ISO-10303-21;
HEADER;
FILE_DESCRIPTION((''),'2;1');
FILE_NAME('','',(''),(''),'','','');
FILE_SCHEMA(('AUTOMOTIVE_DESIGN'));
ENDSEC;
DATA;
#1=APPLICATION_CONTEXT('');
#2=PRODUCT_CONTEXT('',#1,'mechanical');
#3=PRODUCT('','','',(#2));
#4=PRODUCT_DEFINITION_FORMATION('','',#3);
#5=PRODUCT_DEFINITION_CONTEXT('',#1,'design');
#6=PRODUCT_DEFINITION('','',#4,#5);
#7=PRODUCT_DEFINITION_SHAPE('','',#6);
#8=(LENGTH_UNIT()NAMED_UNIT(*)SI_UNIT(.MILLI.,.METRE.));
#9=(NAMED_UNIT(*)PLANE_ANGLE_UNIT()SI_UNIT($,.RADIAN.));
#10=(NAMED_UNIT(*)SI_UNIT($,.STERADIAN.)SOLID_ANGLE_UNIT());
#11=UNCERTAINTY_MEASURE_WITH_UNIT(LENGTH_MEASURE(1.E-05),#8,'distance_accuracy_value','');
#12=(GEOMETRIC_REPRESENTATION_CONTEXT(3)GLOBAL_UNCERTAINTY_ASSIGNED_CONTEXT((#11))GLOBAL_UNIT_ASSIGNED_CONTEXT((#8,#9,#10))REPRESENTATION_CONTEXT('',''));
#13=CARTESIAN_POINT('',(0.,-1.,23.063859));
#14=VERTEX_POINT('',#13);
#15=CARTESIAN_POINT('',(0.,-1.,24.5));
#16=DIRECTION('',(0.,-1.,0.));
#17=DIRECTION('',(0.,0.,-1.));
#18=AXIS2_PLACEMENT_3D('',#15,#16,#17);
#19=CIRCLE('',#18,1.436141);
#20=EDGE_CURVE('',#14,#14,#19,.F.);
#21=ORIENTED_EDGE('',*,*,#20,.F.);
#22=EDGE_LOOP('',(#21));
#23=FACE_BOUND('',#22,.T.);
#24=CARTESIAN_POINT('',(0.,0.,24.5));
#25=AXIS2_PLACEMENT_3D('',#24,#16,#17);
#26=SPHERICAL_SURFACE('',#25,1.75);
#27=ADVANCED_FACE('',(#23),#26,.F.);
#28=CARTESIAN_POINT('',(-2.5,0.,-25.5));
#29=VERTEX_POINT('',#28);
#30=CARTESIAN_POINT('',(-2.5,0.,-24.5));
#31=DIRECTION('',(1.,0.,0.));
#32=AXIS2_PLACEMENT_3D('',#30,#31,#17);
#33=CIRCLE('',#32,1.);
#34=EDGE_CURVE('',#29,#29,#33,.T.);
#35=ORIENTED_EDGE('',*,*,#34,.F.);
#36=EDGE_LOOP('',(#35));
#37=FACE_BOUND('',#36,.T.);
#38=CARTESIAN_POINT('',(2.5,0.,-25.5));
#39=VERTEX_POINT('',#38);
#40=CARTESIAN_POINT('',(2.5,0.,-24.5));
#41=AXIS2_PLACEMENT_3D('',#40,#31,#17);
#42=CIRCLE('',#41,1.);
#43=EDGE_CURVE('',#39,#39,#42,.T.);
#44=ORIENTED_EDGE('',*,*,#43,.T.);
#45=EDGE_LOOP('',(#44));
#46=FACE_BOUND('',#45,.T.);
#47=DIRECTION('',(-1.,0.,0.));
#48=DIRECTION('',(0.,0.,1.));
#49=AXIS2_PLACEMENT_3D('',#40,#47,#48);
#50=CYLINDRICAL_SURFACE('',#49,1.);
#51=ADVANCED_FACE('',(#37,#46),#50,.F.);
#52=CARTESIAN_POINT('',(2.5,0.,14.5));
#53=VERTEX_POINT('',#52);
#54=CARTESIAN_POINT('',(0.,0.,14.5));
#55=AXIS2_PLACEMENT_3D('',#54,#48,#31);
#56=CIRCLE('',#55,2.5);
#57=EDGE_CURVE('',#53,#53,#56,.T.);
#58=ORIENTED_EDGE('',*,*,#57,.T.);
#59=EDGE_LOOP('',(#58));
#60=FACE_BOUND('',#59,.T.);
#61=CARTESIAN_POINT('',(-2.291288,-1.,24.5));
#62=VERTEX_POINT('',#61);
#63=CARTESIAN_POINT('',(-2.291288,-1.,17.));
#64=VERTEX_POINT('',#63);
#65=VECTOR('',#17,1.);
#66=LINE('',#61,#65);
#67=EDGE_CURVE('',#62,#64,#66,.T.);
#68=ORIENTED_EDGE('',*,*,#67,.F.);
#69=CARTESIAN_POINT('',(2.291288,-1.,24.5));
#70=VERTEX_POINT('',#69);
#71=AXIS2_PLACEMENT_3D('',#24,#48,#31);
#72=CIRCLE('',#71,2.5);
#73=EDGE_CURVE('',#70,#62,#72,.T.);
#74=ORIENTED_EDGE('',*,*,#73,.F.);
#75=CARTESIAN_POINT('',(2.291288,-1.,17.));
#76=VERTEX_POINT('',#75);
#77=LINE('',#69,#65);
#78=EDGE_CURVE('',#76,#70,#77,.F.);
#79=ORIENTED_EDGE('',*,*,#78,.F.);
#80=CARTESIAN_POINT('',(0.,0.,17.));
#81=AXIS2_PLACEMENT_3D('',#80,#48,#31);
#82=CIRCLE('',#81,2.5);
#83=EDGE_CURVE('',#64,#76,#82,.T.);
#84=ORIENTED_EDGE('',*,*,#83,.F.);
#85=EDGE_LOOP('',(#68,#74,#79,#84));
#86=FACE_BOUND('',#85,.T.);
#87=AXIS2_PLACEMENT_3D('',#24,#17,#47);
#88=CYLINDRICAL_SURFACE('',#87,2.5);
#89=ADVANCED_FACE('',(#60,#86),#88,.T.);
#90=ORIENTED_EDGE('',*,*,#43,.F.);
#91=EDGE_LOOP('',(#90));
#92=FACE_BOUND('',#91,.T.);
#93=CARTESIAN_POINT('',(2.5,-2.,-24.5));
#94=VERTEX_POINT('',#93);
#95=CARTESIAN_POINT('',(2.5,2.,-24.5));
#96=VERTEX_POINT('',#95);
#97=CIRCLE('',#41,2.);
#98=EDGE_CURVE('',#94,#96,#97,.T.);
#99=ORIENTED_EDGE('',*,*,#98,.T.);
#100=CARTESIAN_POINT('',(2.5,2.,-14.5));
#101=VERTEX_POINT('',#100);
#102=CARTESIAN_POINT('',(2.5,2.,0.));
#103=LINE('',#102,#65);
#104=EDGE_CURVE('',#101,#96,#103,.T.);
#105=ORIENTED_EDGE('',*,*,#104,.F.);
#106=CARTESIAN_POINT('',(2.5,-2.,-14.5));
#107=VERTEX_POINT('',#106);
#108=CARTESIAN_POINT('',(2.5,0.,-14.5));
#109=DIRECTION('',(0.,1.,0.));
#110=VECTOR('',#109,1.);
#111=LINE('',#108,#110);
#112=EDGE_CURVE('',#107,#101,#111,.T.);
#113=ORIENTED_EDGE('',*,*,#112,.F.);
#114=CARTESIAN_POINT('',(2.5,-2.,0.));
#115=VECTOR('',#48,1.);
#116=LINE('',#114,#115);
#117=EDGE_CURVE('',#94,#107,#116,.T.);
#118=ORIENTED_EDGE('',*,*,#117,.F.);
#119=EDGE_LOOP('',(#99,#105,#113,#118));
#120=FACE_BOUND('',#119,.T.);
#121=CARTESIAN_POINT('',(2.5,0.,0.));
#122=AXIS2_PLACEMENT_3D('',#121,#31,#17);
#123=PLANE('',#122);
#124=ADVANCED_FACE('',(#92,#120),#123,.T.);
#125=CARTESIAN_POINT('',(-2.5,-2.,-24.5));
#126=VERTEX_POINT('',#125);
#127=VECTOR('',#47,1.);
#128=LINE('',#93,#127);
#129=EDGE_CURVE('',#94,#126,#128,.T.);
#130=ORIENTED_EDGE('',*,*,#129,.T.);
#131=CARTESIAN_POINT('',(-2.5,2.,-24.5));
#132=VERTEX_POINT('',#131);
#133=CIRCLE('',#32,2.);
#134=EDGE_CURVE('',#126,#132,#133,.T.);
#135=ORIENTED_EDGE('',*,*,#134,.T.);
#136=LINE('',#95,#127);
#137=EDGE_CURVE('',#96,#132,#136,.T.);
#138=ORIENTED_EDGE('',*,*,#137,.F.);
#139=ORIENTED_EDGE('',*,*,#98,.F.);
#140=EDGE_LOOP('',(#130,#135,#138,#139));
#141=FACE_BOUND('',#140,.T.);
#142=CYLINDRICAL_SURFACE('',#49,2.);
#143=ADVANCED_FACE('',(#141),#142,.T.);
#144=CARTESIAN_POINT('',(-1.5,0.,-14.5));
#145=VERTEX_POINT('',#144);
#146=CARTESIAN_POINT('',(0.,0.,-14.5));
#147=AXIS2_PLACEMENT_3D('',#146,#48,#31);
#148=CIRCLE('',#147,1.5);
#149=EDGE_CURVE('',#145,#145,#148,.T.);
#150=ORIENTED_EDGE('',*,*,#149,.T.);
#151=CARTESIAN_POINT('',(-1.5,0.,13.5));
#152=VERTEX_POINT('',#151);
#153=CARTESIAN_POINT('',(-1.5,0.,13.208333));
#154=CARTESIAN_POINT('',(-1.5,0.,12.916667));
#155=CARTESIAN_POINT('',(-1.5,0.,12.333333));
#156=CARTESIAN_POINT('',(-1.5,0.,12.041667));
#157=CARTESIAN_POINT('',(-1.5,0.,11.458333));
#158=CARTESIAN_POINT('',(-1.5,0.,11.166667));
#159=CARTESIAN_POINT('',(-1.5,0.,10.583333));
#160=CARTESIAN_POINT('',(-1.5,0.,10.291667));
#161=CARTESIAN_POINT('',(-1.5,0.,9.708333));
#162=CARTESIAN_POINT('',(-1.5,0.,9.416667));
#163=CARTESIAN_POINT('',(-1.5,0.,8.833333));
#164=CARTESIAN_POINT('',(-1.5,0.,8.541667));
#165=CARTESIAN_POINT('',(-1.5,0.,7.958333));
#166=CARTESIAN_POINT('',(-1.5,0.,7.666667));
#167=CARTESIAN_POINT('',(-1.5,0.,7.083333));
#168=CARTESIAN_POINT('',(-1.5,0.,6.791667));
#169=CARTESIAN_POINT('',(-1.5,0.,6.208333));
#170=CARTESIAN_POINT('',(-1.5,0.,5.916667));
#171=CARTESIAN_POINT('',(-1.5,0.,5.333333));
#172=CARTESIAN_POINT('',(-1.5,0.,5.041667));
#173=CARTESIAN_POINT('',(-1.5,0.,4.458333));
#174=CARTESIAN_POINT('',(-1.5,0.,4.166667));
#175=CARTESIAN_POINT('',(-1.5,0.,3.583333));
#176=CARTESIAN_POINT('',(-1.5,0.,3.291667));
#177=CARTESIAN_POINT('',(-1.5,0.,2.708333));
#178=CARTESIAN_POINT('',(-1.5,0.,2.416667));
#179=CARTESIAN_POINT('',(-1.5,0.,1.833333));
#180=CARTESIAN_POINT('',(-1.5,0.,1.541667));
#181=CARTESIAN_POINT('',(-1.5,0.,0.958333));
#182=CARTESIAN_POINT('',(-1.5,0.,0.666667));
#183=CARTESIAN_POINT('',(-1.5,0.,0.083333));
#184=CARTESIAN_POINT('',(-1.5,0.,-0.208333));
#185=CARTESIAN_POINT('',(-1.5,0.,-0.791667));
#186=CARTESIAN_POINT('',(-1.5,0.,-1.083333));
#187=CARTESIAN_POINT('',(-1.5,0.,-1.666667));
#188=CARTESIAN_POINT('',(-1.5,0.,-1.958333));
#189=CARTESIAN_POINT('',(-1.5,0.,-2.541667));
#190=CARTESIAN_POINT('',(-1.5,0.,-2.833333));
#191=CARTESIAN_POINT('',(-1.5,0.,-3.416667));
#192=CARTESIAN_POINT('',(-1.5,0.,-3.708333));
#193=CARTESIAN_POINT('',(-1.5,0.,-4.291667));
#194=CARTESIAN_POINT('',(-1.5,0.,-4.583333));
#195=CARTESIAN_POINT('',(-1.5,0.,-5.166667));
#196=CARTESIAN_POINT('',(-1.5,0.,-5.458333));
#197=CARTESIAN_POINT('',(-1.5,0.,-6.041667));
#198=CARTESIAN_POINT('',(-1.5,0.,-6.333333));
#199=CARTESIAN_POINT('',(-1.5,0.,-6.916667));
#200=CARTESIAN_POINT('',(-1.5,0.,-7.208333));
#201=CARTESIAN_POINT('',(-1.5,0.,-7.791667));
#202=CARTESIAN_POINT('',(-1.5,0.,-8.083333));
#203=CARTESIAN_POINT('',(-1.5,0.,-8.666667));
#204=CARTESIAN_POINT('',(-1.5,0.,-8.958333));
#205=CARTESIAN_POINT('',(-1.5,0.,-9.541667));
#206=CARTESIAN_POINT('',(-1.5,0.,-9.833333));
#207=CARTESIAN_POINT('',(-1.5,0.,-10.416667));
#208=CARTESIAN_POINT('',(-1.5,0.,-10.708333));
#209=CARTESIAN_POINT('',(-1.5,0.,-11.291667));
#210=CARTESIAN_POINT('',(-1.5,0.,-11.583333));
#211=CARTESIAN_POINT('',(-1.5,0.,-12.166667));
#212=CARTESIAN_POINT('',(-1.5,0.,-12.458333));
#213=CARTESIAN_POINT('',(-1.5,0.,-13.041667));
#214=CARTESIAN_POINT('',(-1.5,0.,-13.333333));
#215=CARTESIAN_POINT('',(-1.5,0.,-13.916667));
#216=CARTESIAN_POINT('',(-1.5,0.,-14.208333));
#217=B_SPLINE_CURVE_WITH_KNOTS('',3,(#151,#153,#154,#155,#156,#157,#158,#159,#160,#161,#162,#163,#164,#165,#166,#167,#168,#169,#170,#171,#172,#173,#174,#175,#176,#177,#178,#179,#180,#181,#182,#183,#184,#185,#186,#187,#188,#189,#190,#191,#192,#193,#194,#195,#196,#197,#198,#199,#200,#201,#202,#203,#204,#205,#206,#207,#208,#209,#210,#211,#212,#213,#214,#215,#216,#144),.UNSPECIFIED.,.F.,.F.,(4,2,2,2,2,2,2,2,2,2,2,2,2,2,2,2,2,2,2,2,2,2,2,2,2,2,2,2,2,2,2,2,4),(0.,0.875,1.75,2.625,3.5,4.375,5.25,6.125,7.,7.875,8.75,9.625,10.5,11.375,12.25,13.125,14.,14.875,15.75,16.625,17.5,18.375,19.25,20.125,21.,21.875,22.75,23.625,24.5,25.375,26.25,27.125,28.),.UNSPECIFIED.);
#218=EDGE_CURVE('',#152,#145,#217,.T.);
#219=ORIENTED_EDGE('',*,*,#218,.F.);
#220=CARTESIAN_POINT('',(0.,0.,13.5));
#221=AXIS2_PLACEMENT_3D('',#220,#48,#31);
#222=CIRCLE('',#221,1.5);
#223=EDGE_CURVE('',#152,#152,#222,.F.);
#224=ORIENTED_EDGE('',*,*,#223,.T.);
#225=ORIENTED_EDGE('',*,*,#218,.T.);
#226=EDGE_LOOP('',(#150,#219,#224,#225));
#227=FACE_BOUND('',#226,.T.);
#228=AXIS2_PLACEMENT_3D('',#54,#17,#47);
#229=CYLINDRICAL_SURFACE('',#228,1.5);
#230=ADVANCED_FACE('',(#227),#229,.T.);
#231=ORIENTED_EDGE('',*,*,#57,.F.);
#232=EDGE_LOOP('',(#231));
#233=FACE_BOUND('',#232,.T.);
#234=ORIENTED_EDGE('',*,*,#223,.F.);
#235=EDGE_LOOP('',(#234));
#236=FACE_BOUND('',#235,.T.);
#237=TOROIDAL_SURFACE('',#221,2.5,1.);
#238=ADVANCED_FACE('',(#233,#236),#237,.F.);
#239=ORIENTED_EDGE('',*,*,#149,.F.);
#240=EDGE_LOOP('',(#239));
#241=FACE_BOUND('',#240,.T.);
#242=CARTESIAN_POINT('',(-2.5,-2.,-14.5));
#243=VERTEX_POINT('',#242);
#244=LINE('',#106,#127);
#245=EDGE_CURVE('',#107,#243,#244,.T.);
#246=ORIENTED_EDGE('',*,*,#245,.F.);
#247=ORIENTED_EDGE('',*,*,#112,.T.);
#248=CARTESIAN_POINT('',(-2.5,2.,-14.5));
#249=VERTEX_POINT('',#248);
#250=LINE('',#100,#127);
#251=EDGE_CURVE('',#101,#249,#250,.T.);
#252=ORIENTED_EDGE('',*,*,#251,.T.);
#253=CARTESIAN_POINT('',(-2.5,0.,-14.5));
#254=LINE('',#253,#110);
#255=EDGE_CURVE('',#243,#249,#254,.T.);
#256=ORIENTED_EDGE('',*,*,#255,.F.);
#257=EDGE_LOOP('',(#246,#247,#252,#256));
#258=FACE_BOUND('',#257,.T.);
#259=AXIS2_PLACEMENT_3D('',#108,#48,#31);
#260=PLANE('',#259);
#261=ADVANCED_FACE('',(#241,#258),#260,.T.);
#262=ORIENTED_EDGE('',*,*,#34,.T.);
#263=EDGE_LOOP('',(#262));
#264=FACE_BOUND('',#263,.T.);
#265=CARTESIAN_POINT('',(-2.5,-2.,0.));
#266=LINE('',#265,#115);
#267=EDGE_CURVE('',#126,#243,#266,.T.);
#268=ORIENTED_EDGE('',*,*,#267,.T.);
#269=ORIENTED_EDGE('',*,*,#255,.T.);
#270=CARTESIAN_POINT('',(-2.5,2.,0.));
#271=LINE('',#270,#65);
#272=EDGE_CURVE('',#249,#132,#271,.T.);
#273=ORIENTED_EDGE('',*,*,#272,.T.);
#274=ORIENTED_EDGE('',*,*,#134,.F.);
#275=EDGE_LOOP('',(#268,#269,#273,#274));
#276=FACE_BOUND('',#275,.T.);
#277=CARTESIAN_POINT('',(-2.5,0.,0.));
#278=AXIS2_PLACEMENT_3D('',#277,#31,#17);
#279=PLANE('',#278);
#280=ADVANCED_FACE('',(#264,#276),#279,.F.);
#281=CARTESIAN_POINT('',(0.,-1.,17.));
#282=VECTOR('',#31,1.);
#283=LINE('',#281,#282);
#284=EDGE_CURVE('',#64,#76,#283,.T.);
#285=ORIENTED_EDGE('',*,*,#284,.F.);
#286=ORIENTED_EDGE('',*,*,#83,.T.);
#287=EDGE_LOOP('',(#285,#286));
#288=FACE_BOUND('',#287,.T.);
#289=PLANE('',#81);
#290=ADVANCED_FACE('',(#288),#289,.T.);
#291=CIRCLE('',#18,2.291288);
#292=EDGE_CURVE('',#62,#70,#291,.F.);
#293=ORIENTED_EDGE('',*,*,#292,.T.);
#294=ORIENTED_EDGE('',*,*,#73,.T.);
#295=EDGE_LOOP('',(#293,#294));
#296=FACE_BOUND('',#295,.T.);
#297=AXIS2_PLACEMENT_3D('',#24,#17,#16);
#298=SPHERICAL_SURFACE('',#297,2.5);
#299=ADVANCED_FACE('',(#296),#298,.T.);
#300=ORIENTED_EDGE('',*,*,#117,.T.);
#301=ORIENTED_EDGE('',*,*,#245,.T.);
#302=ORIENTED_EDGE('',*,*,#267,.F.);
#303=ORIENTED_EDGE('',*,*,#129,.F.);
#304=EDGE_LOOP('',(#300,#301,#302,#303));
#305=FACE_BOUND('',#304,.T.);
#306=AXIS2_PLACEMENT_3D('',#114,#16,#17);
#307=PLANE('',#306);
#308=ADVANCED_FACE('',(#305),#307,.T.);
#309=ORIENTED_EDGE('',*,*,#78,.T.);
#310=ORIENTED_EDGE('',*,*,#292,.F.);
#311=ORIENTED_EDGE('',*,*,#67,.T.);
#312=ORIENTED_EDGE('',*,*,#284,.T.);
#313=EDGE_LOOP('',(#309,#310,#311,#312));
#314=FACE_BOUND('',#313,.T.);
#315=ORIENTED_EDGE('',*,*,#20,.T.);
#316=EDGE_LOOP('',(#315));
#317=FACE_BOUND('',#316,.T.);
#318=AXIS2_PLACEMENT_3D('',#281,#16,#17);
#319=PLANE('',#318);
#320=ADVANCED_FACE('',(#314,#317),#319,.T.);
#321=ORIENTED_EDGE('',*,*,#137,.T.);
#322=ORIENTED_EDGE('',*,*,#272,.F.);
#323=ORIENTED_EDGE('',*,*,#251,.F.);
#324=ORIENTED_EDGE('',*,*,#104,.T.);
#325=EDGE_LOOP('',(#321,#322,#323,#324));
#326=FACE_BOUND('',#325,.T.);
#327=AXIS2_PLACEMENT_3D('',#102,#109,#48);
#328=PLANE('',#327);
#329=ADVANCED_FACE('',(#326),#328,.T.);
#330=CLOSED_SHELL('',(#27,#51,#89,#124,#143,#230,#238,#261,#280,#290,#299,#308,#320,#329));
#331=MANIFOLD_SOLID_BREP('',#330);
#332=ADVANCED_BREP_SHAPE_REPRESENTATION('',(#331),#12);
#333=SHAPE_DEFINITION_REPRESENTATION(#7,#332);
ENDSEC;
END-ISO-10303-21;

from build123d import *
from build123d.topology import SkipClean

# Parameters (mm, degrees)
SKETCH_1_R          = 1.5
EXTRUDE_1_DEPTH     = 14.5
SKETCH_2_R          = 2.5
EXTRUDE_2_DEPTH     = 10
FILLET_1_R          = 1
CUT_EXTRUDE_1_DEPTH = 10
SKETCH_6_R          = 1
EXTRUDE_3_DEPTH     = 2.5


with BuildPart() as part:
    # 草图1 → 凸台-拉伸1 (new body)
    with BuildSketch(Plane.XY):
        with Locations(Location((0, 0, 0), (0, 0, 180))):
            Circle(SKETCH_1_R)
    extrude_1 = extrude(amount=EXTRUDE_1_DEPTH)

    # 草图2 → 凸台-拉伸2 (add)
    with BuildSketch(Plane.XY.offset(14.5)):
        Circle(SKETCH_2_R)
    extrude(amount=EXTRUDE_2_DEPTH)

    # 圆角1
    fillet_1_edges = [part.edges().sort_by_distance(p)[0] for p in [
        (1.5, 0, 14.5),
    ]]
    fillet(fillet_1_edges, radius=FILLET_1_R - 0.0001)  # a hair under: the kernel refuses the full size

    # 草图3 → 旋转1 (revolve)
    with SkipClean():  # the faces are left unmerged after this step: merging them gives an invalid solid
        with BuildSketch(Plane(origin=(0, 0, 0), x_dir=(0, 0, -1), z_dir=(1, 0, 0))):
            with BuildLine():
                ThreePointArc((-27, 0), (-24.5, -2.5), (-22, 0))
                Line((-22, 0), (-24.5, 0))
                Line((-24.5, 0), (-27, 0))
            make_face()
            with BuildLine():
                Line((-24.5, 0), (-22, 0))
                ThreePointArc((-22, 0), (-24.5, 2.5), (-27, 0))
                Line((-27, 0), (-24.5, 0))
            make_face()
        revolve(axis=Axis((0, 0, 0), (0, 0, 1)))
    add(part.part.scale(1), mode=Mode.REPLACE)  # the faces are merged on a copy

    # 草图4 → 切除-拉伸1 (cut)
    with BuildSketch(Plane.XY.offset(27)):
        Polygon((-2.5, -1), (0, -1), (2.5, -1), (2.5, -3), (-2.5, -3), align=None)
    extrude(amount=-CUT_EXTRUDE_1_DEPTH, mode=Mode.SUBTRACT)

    # 草图5 → 切除-旋转11 (revolve, cut)
    with BuildSketch(Plane(origin=(0, 0, 0), x_dir=(0, 0, -1), z_dir=(1, 0, 0))):
        with BuildLine():
            Line((-22.75, 0), (-26.25, 0))
            ThreePointArc((-26.25, 0), (-24.5, -1.75), (-22.75, 0))
        make_face()
    revolve(axis=Axis((0, 0, 0), (0, 0, 1)), mode=Mode.SUBTRACT)

    # 镜向1: 凸台-拉伸1 across plane
    with SkipClean():  # the faces are left unmerged after this step: merging them gives an invalid solid
        add(extrude_1.mirror(Plane.XY))

    # 草图6 → 凸台-拉伸3 (add, symmetric)
    with BuildSketch(Plane(origin=(0, 0, 0), x_dir=(0, 0, -1), z_dir=(1, 0, 0))):
        with BuildLine():
            Line((24.5, -2), (14.5, -2))
            Line((14.5, -2), (14.5, 0))
            Line((14.5, 0), (14.5, 2))
            Line((14.5, 2), (24.5, 2))
            ThreePointArc((24.5, 2), (26.5, 0), (24.5, -2))
        make_face()
        with Locations((24.5, 0)):
            Circle(SKETCH_6_R, mode=Mode.SUBTRACT)
    extrude(amount=EXTRUDE_3_DEPTH, both=True)


solid = part.part
